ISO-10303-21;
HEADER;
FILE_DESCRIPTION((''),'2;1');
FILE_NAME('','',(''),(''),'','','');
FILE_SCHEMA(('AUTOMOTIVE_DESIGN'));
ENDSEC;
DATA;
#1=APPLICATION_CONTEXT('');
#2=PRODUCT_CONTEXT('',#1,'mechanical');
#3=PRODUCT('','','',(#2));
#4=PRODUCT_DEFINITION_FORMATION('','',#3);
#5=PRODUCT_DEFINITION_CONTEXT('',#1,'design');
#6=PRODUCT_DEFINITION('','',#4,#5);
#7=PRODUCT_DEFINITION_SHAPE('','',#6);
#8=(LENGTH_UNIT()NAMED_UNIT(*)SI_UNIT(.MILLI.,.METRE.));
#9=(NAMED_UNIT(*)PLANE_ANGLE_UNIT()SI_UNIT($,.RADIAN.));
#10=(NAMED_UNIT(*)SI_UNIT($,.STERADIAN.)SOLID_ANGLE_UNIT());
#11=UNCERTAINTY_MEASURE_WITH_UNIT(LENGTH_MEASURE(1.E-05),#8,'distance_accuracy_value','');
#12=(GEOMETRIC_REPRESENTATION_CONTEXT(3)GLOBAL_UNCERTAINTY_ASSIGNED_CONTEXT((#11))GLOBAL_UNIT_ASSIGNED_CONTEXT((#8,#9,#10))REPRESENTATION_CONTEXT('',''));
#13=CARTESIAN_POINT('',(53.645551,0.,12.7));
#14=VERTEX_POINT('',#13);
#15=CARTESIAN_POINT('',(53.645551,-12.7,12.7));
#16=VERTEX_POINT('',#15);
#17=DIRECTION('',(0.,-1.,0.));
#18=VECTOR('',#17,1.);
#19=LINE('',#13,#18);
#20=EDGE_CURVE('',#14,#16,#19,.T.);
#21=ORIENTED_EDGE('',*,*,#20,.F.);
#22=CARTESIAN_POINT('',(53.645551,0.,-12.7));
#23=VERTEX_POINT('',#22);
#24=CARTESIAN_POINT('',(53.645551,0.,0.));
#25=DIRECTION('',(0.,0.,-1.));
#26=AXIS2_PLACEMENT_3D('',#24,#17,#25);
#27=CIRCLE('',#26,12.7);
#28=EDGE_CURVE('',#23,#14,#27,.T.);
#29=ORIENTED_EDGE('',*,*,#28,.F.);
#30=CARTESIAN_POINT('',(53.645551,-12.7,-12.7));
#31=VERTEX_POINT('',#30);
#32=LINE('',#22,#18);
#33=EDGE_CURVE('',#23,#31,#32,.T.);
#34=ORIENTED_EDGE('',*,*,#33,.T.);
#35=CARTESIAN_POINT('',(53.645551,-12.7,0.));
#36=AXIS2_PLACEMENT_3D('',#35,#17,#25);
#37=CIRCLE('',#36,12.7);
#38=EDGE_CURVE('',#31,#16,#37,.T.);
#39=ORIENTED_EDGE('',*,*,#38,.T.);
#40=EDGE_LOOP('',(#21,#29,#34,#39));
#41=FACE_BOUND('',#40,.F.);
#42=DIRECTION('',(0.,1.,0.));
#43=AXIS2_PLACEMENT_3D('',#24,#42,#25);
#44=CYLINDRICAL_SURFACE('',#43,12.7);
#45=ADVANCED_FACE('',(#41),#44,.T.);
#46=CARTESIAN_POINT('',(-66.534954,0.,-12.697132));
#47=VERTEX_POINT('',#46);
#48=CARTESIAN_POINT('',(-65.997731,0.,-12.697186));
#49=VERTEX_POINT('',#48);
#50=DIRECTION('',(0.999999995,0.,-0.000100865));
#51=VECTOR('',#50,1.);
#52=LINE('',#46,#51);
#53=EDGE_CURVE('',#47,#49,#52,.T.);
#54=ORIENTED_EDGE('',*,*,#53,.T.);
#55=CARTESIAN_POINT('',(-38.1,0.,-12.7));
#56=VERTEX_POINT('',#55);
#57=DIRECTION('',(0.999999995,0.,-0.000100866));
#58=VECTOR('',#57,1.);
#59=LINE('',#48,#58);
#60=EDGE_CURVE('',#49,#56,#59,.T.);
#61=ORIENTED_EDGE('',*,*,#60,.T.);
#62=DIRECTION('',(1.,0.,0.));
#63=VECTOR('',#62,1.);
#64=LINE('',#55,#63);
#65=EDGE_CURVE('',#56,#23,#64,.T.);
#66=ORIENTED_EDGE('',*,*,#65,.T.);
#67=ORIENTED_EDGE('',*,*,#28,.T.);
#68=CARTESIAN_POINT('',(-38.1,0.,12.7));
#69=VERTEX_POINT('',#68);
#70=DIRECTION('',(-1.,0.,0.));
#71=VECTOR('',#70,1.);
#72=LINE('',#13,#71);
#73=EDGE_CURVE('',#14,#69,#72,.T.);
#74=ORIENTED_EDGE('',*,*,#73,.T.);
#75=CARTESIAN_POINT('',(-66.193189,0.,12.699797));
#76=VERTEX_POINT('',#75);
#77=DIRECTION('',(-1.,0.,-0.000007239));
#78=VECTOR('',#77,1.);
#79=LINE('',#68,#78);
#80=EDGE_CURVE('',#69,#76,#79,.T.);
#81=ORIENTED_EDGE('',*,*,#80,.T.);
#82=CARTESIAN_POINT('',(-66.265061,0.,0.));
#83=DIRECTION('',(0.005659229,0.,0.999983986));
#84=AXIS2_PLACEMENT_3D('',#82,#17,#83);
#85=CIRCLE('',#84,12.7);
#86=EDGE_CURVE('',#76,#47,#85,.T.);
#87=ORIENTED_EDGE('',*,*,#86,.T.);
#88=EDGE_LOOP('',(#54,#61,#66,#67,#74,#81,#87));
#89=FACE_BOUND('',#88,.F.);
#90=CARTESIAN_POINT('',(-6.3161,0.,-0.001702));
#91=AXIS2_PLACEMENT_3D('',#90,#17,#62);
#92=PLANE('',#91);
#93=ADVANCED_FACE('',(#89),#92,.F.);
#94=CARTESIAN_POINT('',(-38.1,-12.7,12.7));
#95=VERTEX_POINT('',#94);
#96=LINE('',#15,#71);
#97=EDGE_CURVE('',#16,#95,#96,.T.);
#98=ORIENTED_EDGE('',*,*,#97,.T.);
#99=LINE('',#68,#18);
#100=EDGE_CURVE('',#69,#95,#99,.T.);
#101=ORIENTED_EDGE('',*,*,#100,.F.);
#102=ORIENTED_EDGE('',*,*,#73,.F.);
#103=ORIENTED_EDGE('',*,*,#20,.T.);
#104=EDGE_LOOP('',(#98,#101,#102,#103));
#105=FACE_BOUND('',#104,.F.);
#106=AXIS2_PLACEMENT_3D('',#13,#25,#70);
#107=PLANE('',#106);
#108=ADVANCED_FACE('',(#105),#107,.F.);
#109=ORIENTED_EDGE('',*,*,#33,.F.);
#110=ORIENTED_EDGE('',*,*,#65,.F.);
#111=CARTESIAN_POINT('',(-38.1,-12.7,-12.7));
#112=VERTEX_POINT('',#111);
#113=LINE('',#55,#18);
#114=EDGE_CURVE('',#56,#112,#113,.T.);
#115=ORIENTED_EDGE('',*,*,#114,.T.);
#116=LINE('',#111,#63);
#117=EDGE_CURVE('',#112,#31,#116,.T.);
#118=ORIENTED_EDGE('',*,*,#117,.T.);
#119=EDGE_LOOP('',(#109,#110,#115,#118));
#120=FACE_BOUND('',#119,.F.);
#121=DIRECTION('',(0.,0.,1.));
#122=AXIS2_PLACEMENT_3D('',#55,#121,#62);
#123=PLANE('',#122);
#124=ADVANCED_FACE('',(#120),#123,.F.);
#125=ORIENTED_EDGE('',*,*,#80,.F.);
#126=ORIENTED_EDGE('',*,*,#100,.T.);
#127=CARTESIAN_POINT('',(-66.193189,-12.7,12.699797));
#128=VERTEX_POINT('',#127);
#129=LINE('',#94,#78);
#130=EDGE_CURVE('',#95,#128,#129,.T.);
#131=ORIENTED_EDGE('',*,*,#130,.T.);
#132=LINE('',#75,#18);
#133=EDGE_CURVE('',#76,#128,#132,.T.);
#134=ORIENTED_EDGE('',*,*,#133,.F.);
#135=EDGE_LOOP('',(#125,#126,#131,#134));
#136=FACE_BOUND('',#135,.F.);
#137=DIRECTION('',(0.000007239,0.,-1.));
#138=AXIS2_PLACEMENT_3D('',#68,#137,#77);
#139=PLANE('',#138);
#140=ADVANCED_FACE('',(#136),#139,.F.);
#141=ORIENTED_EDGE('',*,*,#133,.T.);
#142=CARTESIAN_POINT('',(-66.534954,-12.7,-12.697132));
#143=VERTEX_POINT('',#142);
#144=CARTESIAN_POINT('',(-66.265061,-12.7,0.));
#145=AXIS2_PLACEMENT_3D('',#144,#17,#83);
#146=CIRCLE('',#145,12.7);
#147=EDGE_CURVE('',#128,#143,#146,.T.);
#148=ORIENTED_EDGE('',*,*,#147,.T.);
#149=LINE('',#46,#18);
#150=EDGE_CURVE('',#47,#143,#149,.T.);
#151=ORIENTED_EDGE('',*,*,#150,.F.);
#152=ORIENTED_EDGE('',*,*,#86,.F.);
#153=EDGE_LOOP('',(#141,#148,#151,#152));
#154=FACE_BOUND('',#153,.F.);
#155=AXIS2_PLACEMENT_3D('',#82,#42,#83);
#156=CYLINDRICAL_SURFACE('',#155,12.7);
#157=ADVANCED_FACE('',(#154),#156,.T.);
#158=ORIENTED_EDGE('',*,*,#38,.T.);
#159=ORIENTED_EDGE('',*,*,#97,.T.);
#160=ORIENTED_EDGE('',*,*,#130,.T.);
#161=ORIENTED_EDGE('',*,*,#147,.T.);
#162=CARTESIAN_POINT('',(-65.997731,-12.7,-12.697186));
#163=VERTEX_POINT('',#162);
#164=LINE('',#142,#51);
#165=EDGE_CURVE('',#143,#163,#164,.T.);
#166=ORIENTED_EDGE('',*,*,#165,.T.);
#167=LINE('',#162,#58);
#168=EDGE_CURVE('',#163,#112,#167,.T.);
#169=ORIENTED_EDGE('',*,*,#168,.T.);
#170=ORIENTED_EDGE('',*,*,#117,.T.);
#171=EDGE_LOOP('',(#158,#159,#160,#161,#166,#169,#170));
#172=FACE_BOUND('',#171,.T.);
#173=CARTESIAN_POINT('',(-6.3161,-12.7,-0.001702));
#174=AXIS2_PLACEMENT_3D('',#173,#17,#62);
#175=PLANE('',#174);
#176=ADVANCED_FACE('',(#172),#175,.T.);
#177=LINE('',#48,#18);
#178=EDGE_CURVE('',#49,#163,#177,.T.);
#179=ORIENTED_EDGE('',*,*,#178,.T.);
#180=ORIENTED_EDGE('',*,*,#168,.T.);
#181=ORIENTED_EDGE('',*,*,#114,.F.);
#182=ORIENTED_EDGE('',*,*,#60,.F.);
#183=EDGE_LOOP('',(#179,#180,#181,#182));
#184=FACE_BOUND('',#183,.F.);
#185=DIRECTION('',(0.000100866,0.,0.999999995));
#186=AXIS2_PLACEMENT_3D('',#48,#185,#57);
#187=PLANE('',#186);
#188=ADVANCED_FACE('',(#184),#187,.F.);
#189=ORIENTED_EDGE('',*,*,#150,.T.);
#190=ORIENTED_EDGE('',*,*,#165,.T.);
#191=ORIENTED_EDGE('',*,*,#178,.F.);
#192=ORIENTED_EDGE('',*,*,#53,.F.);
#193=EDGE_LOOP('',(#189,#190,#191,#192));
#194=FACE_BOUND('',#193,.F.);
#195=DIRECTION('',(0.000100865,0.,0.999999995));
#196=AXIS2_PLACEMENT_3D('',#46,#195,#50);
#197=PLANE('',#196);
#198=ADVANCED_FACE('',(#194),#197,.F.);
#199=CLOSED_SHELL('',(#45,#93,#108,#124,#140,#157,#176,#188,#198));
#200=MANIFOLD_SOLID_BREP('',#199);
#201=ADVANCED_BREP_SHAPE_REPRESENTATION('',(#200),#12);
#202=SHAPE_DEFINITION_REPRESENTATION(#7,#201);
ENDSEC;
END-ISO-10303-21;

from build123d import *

# Parameters (mm, degrees)
F1_DEPTH = 12.7


# Not quite as in the source:
# - ends of sketch curves that miss each other by under 0.0002 mm in the source are joined


with BuildPart() as f1:
    # F0 (on Front) → F1 (new body)
    with BuildSketch(Plane.XZ):
        with BuildLine():
            Line((-19.0339237452, 12.7), (-38.1, 12.7))
            Line((-38.1, 12.7), (-66.1931892949, 12.6997966278))
            ThreePointArc((-66.1931892949, 12.6997966278), (-78.963911742, 0.170887308), (-66.5349535226, -12.6971318925))
            Line((-66.5349535226, -12.6971318925), (-65.9977308849, -12.6971860797))
            Line((-65.9977308849, -12.6971860797), (-38.1, -12.7))
            Line((-38.1, -12.7), (38.1, -12.7))
            Line((38.1, -12.7), (53.6455512047, -12.7))
            ThreePointArc((53.6455512047, -12.7), (66.3455512047, 0), (53.6455512047, 12.7))
            Line((53.6455512047, 12.7), (38.1, 12.7))
            Line((38.1, 12.7), (-19.0339237452, 12.7))
        make_face()
    extrude(amount=F1_DEPTH)


solid = f1.part
